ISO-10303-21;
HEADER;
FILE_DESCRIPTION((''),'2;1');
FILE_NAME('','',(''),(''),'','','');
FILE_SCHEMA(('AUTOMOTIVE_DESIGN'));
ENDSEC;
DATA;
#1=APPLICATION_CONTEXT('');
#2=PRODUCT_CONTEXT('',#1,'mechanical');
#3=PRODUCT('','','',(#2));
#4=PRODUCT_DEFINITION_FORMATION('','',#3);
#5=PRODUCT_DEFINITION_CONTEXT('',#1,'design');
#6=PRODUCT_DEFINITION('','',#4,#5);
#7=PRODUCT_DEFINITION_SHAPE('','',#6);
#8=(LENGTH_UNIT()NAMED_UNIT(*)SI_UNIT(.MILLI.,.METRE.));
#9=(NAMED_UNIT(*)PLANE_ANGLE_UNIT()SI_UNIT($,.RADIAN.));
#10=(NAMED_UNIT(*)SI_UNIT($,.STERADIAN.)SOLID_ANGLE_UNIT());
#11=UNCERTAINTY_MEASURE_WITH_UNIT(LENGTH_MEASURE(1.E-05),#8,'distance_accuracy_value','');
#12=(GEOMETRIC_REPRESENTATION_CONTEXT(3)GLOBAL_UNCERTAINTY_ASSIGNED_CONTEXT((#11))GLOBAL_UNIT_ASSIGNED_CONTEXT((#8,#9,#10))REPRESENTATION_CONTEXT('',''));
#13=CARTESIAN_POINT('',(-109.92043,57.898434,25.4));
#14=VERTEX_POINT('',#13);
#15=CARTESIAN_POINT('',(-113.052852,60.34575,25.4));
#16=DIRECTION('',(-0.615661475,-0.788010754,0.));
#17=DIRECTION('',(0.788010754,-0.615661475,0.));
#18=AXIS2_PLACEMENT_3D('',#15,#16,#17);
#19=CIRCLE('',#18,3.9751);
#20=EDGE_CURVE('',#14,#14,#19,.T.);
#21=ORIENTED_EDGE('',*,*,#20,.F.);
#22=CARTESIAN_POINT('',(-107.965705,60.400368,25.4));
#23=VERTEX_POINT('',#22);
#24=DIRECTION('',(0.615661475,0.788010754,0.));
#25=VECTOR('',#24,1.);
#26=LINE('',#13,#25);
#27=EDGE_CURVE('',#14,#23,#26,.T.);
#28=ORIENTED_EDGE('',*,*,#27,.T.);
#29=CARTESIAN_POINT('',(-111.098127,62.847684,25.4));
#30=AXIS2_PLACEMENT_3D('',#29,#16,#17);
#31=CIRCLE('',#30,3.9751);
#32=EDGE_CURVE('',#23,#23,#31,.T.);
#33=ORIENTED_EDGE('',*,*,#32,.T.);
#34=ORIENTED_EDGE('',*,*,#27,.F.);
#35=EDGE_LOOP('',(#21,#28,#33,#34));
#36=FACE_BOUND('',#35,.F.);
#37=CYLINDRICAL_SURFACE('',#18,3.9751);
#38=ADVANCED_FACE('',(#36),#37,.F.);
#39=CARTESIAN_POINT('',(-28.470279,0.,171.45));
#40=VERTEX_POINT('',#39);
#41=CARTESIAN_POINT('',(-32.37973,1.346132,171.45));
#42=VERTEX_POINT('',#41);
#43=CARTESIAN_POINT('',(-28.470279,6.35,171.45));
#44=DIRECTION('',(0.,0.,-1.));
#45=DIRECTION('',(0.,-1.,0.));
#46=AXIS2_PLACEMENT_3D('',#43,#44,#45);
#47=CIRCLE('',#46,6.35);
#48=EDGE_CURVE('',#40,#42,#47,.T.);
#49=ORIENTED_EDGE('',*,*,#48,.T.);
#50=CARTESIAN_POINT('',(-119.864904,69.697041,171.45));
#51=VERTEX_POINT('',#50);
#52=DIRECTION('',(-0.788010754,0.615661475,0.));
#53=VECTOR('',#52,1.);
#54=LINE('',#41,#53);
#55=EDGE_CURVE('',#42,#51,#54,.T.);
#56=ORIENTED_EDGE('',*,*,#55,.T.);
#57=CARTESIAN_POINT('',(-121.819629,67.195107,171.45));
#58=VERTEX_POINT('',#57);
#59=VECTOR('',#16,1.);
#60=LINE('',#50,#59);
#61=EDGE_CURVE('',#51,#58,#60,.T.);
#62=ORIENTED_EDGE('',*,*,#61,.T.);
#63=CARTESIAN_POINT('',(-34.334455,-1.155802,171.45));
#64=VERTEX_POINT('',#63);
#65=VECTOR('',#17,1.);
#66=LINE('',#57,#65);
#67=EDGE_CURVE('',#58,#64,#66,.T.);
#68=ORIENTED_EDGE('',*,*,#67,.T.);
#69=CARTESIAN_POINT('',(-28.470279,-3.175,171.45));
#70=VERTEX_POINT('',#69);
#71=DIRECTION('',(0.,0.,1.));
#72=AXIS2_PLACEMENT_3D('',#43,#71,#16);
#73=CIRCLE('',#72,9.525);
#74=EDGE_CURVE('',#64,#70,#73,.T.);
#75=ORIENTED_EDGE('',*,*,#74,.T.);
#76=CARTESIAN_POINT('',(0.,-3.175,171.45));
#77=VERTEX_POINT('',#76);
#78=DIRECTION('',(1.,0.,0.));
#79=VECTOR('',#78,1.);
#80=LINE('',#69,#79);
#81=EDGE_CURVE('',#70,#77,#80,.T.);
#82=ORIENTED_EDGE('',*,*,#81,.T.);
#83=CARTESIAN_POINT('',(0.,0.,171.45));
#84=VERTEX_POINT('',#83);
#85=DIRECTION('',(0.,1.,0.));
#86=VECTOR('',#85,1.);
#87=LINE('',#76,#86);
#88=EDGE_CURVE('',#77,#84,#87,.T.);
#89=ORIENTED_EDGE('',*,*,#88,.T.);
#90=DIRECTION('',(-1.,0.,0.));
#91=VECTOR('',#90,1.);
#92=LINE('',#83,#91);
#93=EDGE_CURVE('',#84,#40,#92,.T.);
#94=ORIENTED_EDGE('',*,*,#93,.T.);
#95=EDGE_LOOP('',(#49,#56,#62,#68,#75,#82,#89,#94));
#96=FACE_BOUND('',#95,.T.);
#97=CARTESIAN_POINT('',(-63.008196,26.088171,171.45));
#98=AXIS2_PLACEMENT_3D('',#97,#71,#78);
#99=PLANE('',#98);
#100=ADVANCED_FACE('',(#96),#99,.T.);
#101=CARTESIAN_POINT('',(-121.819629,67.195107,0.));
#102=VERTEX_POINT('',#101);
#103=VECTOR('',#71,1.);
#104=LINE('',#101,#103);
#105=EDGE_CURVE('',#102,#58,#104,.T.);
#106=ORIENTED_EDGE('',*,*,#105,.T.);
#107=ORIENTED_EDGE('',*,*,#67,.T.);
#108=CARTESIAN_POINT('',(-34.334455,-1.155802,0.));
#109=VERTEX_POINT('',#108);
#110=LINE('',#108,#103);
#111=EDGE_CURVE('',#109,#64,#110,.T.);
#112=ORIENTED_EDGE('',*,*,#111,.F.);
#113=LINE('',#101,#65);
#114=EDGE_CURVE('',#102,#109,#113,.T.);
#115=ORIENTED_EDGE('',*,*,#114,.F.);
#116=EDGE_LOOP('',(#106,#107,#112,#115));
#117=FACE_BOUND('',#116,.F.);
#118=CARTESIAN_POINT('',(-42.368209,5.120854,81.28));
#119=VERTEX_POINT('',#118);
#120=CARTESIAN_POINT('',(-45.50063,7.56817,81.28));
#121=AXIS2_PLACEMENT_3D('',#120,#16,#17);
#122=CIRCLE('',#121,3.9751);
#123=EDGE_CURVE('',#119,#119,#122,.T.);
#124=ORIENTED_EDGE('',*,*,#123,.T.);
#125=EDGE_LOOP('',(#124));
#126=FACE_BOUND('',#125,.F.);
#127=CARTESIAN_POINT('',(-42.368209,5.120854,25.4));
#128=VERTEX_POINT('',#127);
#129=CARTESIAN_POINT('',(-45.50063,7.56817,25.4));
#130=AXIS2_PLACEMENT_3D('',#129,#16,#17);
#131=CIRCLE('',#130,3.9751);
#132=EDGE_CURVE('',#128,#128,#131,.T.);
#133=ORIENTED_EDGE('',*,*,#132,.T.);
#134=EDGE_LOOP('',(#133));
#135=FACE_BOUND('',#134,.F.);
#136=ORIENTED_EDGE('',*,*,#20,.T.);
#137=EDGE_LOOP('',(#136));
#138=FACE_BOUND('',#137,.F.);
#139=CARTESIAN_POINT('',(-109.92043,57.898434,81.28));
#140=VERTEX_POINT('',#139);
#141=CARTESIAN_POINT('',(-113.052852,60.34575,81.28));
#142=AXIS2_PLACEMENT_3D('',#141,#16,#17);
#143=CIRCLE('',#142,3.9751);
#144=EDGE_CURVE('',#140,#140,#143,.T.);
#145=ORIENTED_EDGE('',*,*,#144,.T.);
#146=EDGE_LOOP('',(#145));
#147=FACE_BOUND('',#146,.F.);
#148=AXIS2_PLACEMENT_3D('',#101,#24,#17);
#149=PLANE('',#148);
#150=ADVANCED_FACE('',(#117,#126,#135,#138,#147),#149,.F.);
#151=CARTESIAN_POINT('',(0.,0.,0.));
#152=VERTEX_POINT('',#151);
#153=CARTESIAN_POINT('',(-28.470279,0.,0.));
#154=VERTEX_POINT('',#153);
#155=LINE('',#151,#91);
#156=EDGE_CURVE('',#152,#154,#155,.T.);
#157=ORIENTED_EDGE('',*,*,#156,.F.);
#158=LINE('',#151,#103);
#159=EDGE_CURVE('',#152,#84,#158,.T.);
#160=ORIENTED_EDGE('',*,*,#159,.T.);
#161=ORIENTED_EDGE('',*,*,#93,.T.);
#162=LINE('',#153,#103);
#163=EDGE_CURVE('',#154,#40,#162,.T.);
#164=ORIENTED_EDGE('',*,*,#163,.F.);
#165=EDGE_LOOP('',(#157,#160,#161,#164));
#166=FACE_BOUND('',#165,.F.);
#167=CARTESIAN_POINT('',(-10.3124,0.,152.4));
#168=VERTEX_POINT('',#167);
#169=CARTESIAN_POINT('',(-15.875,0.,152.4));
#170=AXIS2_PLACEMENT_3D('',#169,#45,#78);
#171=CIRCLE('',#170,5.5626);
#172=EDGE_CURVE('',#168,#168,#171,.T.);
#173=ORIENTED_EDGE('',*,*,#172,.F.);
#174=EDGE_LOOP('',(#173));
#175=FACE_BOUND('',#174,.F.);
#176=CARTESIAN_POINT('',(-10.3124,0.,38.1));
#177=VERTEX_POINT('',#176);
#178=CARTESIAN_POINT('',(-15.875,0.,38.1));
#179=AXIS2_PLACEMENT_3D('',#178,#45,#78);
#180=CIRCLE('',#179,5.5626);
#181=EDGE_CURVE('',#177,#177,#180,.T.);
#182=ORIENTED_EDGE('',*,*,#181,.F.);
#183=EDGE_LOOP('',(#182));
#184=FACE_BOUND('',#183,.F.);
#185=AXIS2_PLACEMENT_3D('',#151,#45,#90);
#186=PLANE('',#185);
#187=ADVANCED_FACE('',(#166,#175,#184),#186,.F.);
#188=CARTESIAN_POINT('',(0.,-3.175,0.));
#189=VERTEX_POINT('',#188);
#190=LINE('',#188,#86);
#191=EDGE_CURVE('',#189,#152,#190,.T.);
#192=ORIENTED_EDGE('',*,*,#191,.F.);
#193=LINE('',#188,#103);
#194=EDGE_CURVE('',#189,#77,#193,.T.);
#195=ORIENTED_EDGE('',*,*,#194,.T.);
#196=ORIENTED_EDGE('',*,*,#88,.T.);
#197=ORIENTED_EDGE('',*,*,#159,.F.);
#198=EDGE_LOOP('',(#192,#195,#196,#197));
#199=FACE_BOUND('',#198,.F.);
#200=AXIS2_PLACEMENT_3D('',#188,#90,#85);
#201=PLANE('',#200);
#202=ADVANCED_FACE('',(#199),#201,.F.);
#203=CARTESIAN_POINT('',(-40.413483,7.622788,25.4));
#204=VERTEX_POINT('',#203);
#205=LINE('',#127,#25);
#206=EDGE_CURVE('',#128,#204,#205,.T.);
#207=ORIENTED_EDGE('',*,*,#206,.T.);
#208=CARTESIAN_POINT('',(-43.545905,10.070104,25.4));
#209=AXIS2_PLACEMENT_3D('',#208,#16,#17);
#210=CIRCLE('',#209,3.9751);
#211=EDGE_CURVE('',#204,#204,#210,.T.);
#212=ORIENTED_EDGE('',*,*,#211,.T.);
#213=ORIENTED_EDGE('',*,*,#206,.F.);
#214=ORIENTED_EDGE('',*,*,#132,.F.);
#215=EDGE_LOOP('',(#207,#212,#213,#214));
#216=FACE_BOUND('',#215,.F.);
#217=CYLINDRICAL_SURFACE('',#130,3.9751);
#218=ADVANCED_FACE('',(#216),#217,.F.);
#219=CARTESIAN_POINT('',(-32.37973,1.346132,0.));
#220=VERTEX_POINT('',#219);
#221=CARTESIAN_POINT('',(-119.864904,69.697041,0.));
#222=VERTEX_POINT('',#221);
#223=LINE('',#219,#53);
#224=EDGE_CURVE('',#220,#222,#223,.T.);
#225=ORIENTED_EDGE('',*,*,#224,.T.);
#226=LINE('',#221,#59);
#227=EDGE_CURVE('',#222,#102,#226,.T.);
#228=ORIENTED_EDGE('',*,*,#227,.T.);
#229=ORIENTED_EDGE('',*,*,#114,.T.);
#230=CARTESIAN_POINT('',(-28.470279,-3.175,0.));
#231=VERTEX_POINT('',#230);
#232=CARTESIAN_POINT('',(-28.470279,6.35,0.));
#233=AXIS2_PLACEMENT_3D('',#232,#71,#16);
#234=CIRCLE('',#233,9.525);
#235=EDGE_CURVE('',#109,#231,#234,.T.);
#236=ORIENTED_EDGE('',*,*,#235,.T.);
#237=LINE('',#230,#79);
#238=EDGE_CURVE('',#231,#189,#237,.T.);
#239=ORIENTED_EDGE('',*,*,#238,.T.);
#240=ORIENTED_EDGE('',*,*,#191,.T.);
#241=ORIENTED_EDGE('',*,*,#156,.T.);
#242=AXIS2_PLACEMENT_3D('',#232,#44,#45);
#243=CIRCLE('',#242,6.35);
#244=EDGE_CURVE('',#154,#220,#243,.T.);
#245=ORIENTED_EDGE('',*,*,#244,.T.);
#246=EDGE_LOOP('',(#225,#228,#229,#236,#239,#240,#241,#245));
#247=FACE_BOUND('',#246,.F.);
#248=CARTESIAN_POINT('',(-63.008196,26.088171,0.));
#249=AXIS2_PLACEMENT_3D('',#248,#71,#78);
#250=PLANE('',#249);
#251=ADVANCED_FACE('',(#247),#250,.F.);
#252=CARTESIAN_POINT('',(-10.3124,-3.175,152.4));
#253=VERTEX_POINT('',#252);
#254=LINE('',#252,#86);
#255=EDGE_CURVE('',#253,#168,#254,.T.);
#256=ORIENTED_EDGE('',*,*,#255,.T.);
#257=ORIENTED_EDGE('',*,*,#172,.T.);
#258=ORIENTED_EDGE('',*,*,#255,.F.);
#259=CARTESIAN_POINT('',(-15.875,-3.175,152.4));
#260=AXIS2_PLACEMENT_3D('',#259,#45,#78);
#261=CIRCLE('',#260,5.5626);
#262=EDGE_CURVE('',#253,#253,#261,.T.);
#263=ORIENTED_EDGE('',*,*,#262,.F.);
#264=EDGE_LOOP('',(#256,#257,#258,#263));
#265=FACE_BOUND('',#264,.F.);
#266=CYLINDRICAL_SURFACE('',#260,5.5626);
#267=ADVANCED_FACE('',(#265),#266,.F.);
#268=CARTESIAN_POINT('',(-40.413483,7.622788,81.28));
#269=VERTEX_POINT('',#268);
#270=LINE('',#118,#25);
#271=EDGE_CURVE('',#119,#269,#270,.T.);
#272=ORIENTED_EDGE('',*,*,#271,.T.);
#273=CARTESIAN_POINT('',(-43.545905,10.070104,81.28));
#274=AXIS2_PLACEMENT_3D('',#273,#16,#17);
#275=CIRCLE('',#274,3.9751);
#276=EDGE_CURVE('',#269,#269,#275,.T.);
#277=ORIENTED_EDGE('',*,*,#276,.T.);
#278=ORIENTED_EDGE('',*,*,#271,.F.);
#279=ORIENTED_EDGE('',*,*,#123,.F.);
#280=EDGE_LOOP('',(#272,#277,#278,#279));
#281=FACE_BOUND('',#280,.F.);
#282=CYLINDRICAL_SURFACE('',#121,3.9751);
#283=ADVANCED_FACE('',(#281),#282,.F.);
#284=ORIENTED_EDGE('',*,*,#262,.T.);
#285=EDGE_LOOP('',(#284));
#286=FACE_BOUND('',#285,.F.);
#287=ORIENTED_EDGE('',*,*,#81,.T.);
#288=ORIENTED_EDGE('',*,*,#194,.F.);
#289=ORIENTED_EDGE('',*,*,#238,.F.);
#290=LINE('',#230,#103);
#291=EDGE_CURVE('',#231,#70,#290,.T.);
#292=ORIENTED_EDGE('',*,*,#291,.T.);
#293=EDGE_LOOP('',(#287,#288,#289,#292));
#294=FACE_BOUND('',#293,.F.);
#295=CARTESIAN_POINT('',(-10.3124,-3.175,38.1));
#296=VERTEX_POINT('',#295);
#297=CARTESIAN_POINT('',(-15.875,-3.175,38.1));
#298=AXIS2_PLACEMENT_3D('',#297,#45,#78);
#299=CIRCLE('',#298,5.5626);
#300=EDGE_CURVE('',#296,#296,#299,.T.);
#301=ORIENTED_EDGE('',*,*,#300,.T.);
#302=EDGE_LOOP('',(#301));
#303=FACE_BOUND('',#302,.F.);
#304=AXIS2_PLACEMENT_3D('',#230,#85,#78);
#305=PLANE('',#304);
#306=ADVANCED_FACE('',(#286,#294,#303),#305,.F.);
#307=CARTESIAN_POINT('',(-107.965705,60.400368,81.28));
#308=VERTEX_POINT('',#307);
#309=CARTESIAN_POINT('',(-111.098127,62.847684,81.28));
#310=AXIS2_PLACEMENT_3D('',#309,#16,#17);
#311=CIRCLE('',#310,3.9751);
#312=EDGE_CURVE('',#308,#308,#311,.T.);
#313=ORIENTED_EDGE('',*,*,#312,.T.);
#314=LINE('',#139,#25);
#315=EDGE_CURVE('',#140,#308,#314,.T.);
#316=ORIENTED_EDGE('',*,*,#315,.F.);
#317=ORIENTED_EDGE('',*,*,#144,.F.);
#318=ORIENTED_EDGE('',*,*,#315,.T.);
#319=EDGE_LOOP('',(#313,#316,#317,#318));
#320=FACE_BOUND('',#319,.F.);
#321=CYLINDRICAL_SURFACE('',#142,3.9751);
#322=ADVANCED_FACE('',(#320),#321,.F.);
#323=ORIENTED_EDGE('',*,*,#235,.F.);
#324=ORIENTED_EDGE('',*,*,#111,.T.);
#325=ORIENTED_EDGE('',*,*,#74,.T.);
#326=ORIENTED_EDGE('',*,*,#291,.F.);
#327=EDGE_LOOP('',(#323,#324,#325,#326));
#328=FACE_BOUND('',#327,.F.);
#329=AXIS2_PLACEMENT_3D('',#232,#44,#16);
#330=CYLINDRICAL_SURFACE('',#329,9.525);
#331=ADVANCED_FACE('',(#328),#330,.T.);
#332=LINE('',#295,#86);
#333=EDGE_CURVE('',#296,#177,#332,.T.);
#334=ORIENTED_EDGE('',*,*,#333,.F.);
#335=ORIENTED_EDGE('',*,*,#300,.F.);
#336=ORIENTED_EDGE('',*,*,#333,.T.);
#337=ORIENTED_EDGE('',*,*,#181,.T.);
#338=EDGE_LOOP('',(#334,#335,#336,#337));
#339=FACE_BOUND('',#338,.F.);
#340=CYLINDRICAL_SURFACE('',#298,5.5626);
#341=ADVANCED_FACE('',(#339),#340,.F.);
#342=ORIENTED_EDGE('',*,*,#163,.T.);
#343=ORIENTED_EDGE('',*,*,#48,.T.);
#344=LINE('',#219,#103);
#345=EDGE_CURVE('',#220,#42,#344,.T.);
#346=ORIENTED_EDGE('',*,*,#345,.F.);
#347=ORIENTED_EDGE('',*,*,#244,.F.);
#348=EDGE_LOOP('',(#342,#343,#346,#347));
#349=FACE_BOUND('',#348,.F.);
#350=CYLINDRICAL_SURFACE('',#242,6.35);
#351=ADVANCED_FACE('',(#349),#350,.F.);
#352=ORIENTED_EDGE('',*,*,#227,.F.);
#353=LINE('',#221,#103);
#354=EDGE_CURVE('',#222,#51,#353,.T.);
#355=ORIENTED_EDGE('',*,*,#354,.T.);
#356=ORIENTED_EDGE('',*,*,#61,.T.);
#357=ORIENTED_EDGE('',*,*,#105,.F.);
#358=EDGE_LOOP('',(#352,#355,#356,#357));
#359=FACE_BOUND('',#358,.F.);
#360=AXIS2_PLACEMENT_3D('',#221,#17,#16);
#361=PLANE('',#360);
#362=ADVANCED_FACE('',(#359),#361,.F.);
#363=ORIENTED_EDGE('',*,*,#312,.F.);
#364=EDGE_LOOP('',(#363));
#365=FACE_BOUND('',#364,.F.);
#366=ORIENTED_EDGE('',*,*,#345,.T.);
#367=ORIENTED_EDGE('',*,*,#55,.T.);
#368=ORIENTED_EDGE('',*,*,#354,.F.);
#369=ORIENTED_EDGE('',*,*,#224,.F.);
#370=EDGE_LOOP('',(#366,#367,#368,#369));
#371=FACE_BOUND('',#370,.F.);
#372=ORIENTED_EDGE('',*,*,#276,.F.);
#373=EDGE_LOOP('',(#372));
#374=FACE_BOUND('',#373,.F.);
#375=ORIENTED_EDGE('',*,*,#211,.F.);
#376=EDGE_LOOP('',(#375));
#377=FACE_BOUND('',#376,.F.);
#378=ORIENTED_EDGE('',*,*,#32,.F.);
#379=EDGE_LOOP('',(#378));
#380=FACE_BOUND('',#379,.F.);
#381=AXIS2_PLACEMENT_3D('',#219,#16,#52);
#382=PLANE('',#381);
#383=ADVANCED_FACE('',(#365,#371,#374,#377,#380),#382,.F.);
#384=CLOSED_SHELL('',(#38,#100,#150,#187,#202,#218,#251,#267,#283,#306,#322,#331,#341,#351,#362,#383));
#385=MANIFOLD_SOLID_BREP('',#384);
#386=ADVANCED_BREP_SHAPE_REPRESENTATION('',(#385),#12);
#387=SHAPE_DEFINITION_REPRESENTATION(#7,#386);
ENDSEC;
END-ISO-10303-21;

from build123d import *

# Parameters (mm, degrees)
F1_DEPTH = 171.45
F2_R     = 5.5626
F3_DEPTH = 72.8730407724
F4_R     = 3.9751
F5_DEPTH = 76.9722036075


# Not quite as in the source:
# - a feature of the source that left no trace in its solid (it failed there, or was rolled back) is left out


with BuildPart() as f1:
    # F0 (on Top) → F1 (new body)
    with BuildSketch(Plane.XY):
        with BuildLine():
            Line((0, -3.175), (0, 0))
            Line((0, 0), (-28.4702794834, 0))
            ThreePointArc((-28.4702794834, 0), (-30.5376372642, 0.3459570449), (-32.3797298517, 1.3461317146))
            Line((-32.3797298517, 1.3461317146), (-119.8649039531, 69.6970407724))
            Line((-119.8649039531, 69.6970407724), (-121.8196291372, 67.1951066297))
            Line((-121.8196291372, 67.1951066297), (-34.3344550359, -1.1558024281))
            ThreePointArc((-34.3344550359, -1.1558024281), (-31.5713161546, -2.6560644326), (-28.4702794834, -3.175))
            Line((-28.4702794834, -3.175), (0, -3.175))
        make_face()
    extrude(amount=F1_DEPTH)

    # F2 (on face) → F3 (cut, through all)
    with BuildSketch(Plane.XZ.offset(3.175)):
        with Locations((-15.875, 152.4)):
            Circle(F2_R)
        with Locations((-15.875, 38.1)):
            Circle(F2_R)
    extrude(amount=-F3_DEPTH, mode=Mode.SUBTRACT)

    # F4 (on face) → F5 (cut, through all)
    with BuildSketch(Plane(origin=(-13.5748343728, -17.3749956639, 0), x_dir=(0.7880107536, -0.6156614753, 0), z_dir=(-0.6156614753, -0.7880107536, 0))):
        with Locations((-126.2394162429, 81.28)):
            Circle(F4_R)
        with Locations((-40.5144162429, 81.28)):
            Circle(F4_R)
        with Locations((-40.5144162429, 25.4)):
            Circle(F4_R)
        with Locations((-126.2394162429, 25.4)):
            Circle(F4_R)
    extrude(amount=-F5_DEPTH, mode=Mode.SUBTRACT)


solid = f1.part
